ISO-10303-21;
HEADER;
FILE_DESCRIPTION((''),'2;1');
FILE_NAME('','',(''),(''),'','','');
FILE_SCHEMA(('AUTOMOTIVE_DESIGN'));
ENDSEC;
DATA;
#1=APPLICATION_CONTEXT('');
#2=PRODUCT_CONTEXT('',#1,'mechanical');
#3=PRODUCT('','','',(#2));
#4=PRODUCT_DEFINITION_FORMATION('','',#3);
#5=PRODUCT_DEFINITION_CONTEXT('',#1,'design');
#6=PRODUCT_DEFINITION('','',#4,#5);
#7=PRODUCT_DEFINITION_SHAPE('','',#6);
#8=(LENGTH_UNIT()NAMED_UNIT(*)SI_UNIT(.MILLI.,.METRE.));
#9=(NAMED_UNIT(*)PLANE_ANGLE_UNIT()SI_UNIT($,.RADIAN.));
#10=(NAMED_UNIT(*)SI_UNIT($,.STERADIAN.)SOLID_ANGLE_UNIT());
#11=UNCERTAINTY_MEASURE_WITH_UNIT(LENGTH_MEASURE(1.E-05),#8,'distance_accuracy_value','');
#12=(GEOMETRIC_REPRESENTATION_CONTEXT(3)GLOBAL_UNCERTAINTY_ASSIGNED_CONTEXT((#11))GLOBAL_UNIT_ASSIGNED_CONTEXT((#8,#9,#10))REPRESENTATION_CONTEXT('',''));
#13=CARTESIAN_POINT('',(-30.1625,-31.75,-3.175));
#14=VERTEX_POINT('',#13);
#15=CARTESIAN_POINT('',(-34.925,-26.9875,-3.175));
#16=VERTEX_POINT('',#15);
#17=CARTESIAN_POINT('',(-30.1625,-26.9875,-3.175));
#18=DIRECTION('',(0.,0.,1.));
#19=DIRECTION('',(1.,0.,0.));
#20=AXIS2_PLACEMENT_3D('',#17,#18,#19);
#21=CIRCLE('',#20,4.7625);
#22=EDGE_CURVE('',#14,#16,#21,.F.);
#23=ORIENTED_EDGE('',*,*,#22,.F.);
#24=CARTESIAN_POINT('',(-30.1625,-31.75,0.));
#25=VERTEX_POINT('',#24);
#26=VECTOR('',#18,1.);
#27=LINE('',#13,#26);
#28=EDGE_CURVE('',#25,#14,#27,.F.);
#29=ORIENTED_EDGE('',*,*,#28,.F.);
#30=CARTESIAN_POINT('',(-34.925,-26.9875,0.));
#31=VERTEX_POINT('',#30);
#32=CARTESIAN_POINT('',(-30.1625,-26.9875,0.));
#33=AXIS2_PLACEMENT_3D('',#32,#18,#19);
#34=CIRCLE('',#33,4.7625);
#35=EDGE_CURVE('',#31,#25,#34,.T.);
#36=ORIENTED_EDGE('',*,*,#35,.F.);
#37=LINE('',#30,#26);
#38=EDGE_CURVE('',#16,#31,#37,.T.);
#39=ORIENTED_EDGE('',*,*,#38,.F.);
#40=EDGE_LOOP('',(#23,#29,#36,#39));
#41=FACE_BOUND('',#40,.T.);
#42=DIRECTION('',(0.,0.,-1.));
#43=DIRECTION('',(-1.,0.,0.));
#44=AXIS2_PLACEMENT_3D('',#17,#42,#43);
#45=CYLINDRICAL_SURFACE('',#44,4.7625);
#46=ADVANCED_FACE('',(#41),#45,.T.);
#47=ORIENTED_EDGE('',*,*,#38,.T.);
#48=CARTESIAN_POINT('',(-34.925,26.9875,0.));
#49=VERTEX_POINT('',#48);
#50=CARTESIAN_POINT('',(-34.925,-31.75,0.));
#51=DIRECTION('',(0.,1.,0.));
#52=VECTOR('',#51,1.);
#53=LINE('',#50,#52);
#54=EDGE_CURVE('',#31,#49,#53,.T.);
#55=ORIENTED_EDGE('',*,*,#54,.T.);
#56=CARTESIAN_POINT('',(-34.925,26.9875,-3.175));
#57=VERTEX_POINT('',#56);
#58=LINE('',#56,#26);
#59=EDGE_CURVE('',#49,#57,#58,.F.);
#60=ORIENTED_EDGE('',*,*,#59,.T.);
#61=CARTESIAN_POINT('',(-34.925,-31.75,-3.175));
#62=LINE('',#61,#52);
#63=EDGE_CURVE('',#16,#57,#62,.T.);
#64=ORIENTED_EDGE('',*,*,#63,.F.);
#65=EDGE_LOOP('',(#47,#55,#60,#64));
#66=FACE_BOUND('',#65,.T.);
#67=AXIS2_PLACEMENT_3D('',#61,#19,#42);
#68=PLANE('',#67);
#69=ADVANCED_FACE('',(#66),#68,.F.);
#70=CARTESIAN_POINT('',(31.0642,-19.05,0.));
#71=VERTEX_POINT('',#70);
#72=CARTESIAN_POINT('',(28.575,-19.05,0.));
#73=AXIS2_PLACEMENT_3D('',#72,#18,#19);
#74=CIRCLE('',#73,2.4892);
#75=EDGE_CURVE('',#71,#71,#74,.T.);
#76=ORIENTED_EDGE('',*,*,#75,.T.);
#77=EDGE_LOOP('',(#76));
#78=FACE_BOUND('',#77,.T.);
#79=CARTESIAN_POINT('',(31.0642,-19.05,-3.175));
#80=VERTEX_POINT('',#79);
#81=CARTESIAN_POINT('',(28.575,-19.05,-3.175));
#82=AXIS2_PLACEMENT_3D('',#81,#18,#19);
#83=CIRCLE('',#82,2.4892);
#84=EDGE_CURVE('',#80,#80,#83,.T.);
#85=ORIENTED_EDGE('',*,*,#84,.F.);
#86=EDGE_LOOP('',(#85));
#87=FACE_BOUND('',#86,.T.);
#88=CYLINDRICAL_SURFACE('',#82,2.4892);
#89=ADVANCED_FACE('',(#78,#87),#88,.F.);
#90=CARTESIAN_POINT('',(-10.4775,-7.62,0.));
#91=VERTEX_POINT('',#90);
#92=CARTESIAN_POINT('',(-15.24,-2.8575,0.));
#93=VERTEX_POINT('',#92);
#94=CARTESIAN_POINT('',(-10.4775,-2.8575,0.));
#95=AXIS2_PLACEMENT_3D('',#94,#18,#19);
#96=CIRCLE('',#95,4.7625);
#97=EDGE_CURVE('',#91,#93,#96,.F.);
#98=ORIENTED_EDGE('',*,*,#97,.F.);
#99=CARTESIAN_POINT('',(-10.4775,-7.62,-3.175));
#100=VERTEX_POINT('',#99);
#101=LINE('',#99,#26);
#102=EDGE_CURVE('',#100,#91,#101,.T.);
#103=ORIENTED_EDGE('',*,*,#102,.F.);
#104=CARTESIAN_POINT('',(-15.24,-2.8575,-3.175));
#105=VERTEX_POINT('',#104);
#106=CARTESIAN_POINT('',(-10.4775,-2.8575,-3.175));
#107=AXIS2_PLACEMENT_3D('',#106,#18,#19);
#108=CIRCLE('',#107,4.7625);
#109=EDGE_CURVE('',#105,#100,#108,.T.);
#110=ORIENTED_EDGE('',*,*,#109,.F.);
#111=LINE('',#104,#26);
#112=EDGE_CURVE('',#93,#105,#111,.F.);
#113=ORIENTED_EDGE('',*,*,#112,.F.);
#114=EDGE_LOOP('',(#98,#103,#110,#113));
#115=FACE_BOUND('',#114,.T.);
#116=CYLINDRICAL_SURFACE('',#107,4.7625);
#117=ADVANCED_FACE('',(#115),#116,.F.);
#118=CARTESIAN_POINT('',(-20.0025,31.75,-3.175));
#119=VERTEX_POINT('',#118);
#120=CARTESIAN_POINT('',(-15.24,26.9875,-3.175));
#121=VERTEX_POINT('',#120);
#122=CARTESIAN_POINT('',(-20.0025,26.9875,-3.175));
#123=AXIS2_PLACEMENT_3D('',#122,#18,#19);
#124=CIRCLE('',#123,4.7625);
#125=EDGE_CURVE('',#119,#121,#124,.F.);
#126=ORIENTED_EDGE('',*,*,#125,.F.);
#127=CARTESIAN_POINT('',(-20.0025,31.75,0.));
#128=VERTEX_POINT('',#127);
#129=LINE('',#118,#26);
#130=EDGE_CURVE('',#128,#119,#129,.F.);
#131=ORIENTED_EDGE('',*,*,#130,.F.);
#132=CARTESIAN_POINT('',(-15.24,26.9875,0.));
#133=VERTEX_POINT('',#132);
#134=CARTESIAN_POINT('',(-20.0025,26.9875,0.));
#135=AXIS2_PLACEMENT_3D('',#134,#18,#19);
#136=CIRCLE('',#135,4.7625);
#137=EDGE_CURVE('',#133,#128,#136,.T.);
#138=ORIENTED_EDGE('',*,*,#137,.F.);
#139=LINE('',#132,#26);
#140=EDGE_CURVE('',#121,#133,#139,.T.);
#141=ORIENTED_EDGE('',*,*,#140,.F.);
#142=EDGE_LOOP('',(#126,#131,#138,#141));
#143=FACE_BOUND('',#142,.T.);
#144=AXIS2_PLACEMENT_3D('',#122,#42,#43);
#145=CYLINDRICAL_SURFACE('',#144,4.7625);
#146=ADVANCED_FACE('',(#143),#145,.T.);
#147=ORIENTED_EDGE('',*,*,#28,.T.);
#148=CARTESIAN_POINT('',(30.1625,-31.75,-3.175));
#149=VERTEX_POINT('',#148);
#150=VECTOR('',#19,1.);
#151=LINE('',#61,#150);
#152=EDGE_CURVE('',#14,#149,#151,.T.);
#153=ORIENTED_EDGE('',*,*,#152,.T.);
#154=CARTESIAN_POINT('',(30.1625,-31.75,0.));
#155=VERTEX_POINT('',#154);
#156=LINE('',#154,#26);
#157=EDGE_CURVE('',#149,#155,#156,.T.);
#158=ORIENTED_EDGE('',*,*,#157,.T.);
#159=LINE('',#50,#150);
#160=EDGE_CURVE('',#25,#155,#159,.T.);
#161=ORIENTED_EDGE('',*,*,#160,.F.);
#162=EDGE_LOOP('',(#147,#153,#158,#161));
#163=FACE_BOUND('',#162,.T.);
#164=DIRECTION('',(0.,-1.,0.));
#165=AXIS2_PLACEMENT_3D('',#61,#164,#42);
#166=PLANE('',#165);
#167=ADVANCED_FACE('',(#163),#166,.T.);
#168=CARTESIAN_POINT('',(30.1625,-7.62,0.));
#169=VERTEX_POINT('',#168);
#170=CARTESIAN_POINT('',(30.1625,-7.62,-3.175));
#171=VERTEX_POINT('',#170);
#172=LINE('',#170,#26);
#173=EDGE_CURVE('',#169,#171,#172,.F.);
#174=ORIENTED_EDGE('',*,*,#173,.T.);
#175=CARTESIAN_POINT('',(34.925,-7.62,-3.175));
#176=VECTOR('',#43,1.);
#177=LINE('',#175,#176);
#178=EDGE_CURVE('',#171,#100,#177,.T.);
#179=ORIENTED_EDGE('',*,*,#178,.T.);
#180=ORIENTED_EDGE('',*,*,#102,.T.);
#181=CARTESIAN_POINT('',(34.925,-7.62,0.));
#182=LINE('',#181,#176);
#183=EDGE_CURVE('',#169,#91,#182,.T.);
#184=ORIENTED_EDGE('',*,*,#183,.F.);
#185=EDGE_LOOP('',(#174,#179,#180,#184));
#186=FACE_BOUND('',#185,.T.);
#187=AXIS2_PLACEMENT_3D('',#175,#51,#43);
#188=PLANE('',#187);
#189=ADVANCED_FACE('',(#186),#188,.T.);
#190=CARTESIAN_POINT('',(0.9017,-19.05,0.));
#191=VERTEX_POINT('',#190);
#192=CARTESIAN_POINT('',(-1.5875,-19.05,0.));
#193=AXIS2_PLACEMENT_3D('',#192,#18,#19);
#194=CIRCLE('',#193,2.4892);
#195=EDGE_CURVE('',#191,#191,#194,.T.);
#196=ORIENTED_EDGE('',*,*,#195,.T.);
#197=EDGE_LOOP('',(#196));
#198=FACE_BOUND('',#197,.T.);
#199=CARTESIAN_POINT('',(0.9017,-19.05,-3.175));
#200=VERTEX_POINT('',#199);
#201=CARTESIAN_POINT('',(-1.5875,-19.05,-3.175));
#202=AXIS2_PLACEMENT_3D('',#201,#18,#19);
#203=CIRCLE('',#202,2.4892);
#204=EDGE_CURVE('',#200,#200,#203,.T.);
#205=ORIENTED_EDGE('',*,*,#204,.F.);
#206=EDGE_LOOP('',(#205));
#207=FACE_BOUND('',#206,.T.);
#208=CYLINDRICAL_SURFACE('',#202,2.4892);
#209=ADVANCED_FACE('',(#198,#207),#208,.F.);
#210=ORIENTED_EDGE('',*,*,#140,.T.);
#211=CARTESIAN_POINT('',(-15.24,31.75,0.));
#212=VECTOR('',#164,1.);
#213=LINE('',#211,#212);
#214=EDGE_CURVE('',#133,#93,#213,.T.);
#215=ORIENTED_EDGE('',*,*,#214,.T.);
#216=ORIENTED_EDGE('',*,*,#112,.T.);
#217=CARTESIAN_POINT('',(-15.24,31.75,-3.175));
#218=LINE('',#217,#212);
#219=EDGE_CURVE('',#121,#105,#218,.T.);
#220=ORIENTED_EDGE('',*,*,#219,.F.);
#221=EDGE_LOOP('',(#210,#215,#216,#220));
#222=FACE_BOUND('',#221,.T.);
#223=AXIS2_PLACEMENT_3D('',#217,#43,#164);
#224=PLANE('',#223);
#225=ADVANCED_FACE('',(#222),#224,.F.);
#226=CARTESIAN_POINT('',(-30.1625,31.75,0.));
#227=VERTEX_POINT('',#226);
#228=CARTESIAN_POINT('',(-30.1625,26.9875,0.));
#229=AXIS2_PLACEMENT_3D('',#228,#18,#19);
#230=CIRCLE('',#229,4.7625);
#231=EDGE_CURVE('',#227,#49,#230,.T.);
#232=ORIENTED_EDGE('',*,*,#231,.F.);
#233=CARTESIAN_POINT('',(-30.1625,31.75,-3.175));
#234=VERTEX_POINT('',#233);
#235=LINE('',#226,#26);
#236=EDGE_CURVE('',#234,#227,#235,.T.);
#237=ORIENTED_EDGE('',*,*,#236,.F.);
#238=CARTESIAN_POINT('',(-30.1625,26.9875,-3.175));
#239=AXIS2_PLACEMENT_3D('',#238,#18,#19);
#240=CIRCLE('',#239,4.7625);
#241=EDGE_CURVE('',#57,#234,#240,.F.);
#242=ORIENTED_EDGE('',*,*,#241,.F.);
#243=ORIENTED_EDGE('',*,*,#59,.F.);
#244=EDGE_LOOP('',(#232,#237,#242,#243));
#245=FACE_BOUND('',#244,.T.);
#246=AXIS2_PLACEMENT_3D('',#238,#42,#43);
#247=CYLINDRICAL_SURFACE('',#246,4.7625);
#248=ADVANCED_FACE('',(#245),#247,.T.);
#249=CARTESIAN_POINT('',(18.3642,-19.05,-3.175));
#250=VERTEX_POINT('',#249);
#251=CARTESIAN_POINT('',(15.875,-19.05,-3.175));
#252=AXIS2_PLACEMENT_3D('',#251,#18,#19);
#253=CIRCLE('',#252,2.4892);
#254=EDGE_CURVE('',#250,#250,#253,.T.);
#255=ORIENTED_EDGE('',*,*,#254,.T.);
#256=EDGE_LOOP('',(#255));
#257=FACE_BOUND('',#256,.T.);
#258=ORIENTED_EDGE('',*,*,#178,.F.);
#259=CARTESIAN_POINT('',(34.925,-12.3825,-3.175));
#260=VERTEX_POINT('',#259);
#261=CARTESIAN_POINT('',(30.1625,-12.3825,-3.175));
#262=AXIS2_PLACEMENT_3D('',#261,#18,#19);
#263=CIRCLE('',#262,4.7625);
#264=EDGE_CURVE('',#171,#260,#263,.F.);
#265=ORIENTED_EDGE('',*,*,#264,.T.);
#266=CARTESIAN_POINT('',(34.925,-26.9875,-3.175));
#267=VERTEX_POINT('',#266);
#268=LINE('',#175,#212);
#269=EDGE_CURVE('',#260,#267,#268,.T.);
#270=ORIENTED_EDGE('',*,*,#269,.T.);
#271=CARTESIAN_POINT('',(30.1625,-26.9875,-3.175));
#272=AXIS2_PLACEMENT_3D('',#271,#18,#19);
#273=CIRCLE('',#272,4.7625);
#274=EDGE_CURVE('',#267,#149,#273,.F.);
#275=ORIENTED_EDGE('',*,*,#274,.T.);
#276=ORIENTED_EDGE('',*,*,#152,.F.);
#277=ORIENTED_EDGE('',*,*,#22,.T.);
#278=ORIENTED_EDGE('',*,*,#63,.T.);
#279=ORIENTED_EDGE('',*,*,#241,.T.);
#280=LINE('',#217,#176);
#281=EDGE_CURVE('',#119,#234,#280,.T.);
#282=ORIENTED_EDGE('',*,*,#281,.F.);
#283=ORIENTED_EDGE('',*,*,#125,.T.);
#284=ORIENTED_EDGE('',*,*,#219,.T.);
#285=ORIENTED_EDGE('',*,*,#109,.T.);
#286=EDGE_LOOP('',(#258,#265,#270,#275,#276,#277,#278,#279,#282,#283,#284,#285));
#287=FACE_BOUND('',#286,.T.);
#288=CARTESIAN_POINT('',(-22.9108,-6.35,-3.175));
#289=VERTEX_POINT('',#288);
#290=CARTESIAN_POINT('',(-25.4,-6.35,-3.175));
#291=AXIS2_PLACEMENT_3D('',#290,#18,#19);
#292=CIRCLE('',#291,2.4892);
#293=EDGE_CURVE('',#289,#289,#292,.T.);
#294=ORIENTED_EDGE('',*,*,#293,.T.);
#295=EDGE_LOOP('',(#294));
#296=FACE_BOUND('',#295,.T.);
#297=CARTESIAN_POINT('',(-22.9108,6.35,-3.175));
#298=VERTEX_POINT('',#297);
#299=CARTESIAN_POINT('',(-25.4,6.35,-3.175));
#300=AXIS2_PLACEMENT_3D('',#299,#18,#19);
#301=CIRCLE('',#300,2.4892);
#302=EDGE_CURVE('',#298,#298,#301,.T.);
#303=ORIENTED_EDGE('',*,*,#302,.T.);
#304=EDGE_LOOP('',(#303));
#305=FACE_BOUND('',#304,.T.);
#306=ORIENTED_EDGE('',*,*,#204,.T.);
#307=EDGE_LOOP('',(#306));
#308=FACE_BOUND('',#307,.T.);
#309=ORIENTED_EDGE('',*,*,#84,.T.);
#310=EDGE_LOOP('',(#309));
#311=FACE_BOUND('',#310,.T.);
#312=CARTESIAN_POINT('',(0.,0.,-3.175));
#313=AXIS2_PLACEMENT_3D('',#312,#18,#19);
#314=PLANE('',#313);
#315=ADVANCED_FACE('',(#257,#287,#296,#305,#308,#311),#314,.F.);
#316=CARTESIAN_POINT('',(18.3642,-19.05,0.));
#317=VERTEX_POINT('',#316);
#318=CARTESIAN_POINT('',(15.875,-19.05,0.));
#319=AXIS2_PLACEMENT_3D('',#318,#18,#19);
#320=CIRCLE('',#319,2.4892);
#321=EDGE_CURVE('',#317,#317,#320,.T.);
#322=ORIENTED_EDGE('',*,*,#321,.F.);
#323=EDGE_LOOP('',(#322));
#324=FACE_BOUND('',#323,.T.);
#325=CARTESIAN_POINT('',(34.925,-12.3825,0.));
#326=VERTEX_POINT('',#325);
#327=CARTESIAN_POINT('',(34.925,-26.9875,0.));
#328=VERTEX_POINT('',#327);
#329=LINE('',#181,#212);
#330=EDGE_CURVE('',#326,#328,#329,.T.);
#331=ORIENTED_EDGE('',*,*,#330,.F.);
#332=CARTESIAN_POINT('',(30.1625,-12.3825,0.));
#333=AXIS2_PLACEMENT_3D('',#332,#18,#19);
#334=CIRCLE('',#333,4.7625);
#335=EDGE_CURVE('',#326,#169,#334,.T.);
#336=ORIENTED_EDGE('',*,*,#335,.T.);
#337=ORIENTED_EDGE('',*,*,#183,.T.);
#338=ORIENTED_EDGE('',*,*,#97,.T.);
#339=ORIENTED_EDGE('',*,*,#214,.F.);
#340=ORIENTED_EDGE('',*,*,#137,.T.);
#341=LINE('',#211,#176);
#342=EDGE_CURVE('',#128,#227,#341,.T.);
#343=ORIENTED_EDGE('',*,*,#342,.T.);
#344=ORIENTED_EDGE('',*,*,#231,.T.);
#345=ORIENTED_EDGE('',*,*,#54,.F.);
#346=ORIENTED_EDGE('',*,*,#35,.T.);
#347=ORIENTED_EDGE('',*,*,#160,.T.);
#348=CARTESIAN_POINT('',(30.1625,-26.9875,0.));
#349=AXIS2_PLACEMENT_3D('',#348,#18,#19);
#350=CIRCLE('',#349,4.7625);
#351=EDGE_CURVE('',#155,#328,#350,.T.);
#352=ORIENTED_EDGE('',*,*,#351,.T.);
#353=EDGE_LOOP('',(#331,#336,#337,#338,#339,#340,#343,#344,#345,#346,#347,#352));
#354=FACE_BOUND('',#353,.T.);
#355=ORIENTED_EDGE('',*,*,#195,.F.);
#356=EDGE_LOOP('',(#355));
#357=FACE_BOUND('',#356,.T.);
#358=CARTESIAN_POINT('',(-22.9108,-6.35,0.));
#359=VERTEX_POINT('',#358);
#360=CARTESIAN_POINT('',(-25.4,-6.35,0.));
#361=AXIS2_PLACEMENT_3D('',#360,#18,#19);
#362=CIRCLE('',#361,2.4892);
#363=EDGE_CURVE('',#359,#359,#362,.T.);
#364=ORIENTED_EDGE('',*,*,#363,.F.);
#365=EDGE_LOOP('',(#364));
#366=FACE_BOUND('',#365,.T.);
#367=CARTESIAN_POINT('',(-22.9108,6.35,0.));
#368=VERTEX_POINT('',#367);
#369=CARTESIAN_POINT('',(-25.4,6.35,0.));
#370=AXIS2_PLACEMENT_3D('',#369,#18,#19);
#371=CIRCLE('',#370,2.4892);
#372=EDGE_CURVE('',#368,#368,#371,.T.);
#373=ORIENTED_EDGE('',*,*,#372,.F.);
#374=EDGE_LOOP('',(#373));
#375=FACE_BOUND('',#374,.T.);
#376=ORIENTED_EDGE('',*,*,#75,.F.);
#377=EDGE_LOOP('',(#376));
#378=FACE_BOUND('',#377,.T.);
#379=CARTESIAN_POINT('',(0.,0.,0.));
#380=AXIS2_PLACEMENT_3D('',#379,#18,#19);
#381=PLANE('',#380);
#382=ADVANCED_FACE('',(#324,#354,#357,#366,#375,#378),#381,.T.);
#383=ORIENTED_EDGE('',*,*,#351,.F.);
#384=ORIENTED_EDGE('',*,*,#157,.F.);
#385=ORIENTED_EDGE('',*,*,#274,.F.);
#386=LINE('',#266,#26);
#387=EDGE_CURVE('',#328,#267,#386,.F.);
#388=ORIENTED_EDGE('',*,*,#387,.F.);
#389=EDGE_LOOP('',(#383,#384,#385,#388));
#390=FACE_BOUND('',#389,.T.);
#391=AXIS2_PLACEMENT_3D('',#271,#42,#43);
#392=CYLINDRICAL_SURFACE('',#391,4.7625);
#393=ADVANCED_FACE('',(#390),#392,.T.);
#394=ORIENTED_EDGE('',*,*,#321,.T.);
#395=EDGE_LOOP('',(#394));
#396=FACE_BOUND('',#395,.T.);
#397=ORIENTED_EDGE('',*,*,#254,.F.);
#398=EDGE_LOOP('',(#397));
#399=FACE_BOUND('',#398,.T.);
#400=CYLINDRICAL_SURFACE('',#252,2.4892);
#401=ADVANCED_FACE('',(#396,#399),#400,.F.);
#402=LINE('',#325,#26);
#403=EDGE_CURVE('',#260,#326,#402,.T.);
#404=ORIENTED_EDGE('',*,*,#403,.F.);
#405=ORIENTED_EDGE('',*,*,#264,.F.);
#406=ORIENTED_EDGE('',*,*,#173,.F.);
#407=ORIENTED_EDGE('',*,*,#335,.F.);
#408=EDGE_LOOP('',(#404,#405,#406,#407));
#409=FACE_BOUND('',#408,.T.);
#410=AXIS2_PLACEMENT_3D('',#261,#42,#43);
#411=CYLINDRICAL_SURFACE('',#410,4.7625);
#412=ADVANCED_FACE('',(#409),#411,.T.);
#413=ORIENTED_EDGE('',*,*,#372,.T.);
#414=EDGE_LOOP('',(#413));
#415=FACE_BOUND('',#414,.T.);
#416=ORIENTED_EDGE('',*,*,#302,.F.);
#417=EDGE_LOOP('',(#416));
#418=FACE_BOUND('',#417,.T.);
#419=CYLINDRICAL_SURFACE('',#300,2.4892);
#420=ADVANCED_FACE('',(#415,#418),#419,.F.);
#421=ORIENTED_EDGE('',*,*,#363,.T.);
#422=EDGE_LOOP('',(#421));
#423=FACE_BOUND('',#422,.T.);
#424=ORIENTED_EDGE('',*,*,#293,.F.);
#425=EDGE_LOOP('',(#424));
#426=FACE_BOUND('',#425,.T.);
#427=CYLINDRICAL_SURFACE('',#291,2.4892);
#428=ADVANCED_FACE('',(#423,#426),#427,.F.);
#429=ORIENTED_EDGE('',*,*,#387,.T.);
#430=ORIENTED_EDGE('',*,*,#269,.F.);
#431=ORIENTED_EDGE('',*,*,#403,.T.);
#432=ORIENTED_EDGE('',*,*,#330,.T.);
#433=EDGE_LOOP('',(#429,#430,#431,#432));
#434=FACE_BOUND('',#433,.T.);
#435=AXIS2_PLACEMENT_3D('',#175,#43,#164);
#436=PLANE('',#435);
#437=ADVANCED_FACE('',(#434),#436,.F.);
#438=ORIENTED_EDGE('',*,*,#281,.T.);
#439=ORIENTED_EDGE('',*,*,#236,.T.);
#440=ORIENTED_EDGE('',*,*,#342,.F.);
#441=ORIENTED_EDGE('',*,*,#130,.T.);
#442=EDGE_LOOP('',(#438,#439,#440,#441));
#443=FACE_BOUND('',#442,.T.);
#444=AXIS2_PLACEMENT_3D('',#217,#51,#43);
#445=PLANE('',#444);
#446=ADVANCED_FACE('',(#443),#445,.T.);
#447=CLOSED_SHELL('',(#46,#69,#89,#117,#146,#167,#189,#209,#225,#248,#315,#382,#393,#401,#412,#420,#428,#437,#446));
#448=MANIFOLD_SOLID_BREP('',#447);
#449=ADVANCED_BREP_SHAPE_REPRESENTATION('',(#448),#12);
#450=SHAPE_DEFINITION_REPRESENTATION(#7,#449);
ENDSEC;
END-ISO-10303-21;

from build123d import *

# Parameters (mm, degrees)
SKETCH1_R          = 2.4892
BASE_FLANGE1_DEPTH = 3.175
FILLET2_R          = 4.7625


# Sheet-metal steps are written as plain solids
with BuildPart() as part:
    # Sketch1 → Base-Flange1 (new body)
    with BuildSketch(Plane.XY):
        Polygon((-15.24, 31.75), (-34.925, 31.75), (-34.925, -31.75), (34.925, -31.75), (34.925, -7.62), (-15.24, -7.62), align=None)
        with Locations((-25.4, -6.35)):
            Circle(SKETCH1_R, mode=Mode.SUBTRACT)
        with Locations((-25.4, 6.35)):
            Circle(SKETCH1_R, mode=Mode.SUBTRACT)
        with Locations((-1.5875, -19.05)):
            Circle(SKETCH1_R, mode=Mode.SUBTRACT)
        with Locations((15.875, -19.05)):
            Circle(SKETCH1_R, mode=Mode.SUBTRACT)
        with Locations((28.575, -19.05)):
            Circle(SKETCH1_R, mode=Mode.SUBTRACT)
    extrude(amount=-BASE_FLANGE1_DEPTH)

    # Fillet2
    fillet2_edges = [part.edges().sort_by_distance(p)[0] for p in [
        (-34.925, -31.75, -1.5875),
        (34.925, -31.75, -1.5875),
        (34.925, -7.62, -1.5875),
        (-15.24, -7.62, -1.5875),
        (-15.24, 31.75, -1.5875),
        (-34.925, 31.75, -1.5875),
    ]]
    fillet(fillet2_edges, radius=FILLET2_R)


solid = part.part
